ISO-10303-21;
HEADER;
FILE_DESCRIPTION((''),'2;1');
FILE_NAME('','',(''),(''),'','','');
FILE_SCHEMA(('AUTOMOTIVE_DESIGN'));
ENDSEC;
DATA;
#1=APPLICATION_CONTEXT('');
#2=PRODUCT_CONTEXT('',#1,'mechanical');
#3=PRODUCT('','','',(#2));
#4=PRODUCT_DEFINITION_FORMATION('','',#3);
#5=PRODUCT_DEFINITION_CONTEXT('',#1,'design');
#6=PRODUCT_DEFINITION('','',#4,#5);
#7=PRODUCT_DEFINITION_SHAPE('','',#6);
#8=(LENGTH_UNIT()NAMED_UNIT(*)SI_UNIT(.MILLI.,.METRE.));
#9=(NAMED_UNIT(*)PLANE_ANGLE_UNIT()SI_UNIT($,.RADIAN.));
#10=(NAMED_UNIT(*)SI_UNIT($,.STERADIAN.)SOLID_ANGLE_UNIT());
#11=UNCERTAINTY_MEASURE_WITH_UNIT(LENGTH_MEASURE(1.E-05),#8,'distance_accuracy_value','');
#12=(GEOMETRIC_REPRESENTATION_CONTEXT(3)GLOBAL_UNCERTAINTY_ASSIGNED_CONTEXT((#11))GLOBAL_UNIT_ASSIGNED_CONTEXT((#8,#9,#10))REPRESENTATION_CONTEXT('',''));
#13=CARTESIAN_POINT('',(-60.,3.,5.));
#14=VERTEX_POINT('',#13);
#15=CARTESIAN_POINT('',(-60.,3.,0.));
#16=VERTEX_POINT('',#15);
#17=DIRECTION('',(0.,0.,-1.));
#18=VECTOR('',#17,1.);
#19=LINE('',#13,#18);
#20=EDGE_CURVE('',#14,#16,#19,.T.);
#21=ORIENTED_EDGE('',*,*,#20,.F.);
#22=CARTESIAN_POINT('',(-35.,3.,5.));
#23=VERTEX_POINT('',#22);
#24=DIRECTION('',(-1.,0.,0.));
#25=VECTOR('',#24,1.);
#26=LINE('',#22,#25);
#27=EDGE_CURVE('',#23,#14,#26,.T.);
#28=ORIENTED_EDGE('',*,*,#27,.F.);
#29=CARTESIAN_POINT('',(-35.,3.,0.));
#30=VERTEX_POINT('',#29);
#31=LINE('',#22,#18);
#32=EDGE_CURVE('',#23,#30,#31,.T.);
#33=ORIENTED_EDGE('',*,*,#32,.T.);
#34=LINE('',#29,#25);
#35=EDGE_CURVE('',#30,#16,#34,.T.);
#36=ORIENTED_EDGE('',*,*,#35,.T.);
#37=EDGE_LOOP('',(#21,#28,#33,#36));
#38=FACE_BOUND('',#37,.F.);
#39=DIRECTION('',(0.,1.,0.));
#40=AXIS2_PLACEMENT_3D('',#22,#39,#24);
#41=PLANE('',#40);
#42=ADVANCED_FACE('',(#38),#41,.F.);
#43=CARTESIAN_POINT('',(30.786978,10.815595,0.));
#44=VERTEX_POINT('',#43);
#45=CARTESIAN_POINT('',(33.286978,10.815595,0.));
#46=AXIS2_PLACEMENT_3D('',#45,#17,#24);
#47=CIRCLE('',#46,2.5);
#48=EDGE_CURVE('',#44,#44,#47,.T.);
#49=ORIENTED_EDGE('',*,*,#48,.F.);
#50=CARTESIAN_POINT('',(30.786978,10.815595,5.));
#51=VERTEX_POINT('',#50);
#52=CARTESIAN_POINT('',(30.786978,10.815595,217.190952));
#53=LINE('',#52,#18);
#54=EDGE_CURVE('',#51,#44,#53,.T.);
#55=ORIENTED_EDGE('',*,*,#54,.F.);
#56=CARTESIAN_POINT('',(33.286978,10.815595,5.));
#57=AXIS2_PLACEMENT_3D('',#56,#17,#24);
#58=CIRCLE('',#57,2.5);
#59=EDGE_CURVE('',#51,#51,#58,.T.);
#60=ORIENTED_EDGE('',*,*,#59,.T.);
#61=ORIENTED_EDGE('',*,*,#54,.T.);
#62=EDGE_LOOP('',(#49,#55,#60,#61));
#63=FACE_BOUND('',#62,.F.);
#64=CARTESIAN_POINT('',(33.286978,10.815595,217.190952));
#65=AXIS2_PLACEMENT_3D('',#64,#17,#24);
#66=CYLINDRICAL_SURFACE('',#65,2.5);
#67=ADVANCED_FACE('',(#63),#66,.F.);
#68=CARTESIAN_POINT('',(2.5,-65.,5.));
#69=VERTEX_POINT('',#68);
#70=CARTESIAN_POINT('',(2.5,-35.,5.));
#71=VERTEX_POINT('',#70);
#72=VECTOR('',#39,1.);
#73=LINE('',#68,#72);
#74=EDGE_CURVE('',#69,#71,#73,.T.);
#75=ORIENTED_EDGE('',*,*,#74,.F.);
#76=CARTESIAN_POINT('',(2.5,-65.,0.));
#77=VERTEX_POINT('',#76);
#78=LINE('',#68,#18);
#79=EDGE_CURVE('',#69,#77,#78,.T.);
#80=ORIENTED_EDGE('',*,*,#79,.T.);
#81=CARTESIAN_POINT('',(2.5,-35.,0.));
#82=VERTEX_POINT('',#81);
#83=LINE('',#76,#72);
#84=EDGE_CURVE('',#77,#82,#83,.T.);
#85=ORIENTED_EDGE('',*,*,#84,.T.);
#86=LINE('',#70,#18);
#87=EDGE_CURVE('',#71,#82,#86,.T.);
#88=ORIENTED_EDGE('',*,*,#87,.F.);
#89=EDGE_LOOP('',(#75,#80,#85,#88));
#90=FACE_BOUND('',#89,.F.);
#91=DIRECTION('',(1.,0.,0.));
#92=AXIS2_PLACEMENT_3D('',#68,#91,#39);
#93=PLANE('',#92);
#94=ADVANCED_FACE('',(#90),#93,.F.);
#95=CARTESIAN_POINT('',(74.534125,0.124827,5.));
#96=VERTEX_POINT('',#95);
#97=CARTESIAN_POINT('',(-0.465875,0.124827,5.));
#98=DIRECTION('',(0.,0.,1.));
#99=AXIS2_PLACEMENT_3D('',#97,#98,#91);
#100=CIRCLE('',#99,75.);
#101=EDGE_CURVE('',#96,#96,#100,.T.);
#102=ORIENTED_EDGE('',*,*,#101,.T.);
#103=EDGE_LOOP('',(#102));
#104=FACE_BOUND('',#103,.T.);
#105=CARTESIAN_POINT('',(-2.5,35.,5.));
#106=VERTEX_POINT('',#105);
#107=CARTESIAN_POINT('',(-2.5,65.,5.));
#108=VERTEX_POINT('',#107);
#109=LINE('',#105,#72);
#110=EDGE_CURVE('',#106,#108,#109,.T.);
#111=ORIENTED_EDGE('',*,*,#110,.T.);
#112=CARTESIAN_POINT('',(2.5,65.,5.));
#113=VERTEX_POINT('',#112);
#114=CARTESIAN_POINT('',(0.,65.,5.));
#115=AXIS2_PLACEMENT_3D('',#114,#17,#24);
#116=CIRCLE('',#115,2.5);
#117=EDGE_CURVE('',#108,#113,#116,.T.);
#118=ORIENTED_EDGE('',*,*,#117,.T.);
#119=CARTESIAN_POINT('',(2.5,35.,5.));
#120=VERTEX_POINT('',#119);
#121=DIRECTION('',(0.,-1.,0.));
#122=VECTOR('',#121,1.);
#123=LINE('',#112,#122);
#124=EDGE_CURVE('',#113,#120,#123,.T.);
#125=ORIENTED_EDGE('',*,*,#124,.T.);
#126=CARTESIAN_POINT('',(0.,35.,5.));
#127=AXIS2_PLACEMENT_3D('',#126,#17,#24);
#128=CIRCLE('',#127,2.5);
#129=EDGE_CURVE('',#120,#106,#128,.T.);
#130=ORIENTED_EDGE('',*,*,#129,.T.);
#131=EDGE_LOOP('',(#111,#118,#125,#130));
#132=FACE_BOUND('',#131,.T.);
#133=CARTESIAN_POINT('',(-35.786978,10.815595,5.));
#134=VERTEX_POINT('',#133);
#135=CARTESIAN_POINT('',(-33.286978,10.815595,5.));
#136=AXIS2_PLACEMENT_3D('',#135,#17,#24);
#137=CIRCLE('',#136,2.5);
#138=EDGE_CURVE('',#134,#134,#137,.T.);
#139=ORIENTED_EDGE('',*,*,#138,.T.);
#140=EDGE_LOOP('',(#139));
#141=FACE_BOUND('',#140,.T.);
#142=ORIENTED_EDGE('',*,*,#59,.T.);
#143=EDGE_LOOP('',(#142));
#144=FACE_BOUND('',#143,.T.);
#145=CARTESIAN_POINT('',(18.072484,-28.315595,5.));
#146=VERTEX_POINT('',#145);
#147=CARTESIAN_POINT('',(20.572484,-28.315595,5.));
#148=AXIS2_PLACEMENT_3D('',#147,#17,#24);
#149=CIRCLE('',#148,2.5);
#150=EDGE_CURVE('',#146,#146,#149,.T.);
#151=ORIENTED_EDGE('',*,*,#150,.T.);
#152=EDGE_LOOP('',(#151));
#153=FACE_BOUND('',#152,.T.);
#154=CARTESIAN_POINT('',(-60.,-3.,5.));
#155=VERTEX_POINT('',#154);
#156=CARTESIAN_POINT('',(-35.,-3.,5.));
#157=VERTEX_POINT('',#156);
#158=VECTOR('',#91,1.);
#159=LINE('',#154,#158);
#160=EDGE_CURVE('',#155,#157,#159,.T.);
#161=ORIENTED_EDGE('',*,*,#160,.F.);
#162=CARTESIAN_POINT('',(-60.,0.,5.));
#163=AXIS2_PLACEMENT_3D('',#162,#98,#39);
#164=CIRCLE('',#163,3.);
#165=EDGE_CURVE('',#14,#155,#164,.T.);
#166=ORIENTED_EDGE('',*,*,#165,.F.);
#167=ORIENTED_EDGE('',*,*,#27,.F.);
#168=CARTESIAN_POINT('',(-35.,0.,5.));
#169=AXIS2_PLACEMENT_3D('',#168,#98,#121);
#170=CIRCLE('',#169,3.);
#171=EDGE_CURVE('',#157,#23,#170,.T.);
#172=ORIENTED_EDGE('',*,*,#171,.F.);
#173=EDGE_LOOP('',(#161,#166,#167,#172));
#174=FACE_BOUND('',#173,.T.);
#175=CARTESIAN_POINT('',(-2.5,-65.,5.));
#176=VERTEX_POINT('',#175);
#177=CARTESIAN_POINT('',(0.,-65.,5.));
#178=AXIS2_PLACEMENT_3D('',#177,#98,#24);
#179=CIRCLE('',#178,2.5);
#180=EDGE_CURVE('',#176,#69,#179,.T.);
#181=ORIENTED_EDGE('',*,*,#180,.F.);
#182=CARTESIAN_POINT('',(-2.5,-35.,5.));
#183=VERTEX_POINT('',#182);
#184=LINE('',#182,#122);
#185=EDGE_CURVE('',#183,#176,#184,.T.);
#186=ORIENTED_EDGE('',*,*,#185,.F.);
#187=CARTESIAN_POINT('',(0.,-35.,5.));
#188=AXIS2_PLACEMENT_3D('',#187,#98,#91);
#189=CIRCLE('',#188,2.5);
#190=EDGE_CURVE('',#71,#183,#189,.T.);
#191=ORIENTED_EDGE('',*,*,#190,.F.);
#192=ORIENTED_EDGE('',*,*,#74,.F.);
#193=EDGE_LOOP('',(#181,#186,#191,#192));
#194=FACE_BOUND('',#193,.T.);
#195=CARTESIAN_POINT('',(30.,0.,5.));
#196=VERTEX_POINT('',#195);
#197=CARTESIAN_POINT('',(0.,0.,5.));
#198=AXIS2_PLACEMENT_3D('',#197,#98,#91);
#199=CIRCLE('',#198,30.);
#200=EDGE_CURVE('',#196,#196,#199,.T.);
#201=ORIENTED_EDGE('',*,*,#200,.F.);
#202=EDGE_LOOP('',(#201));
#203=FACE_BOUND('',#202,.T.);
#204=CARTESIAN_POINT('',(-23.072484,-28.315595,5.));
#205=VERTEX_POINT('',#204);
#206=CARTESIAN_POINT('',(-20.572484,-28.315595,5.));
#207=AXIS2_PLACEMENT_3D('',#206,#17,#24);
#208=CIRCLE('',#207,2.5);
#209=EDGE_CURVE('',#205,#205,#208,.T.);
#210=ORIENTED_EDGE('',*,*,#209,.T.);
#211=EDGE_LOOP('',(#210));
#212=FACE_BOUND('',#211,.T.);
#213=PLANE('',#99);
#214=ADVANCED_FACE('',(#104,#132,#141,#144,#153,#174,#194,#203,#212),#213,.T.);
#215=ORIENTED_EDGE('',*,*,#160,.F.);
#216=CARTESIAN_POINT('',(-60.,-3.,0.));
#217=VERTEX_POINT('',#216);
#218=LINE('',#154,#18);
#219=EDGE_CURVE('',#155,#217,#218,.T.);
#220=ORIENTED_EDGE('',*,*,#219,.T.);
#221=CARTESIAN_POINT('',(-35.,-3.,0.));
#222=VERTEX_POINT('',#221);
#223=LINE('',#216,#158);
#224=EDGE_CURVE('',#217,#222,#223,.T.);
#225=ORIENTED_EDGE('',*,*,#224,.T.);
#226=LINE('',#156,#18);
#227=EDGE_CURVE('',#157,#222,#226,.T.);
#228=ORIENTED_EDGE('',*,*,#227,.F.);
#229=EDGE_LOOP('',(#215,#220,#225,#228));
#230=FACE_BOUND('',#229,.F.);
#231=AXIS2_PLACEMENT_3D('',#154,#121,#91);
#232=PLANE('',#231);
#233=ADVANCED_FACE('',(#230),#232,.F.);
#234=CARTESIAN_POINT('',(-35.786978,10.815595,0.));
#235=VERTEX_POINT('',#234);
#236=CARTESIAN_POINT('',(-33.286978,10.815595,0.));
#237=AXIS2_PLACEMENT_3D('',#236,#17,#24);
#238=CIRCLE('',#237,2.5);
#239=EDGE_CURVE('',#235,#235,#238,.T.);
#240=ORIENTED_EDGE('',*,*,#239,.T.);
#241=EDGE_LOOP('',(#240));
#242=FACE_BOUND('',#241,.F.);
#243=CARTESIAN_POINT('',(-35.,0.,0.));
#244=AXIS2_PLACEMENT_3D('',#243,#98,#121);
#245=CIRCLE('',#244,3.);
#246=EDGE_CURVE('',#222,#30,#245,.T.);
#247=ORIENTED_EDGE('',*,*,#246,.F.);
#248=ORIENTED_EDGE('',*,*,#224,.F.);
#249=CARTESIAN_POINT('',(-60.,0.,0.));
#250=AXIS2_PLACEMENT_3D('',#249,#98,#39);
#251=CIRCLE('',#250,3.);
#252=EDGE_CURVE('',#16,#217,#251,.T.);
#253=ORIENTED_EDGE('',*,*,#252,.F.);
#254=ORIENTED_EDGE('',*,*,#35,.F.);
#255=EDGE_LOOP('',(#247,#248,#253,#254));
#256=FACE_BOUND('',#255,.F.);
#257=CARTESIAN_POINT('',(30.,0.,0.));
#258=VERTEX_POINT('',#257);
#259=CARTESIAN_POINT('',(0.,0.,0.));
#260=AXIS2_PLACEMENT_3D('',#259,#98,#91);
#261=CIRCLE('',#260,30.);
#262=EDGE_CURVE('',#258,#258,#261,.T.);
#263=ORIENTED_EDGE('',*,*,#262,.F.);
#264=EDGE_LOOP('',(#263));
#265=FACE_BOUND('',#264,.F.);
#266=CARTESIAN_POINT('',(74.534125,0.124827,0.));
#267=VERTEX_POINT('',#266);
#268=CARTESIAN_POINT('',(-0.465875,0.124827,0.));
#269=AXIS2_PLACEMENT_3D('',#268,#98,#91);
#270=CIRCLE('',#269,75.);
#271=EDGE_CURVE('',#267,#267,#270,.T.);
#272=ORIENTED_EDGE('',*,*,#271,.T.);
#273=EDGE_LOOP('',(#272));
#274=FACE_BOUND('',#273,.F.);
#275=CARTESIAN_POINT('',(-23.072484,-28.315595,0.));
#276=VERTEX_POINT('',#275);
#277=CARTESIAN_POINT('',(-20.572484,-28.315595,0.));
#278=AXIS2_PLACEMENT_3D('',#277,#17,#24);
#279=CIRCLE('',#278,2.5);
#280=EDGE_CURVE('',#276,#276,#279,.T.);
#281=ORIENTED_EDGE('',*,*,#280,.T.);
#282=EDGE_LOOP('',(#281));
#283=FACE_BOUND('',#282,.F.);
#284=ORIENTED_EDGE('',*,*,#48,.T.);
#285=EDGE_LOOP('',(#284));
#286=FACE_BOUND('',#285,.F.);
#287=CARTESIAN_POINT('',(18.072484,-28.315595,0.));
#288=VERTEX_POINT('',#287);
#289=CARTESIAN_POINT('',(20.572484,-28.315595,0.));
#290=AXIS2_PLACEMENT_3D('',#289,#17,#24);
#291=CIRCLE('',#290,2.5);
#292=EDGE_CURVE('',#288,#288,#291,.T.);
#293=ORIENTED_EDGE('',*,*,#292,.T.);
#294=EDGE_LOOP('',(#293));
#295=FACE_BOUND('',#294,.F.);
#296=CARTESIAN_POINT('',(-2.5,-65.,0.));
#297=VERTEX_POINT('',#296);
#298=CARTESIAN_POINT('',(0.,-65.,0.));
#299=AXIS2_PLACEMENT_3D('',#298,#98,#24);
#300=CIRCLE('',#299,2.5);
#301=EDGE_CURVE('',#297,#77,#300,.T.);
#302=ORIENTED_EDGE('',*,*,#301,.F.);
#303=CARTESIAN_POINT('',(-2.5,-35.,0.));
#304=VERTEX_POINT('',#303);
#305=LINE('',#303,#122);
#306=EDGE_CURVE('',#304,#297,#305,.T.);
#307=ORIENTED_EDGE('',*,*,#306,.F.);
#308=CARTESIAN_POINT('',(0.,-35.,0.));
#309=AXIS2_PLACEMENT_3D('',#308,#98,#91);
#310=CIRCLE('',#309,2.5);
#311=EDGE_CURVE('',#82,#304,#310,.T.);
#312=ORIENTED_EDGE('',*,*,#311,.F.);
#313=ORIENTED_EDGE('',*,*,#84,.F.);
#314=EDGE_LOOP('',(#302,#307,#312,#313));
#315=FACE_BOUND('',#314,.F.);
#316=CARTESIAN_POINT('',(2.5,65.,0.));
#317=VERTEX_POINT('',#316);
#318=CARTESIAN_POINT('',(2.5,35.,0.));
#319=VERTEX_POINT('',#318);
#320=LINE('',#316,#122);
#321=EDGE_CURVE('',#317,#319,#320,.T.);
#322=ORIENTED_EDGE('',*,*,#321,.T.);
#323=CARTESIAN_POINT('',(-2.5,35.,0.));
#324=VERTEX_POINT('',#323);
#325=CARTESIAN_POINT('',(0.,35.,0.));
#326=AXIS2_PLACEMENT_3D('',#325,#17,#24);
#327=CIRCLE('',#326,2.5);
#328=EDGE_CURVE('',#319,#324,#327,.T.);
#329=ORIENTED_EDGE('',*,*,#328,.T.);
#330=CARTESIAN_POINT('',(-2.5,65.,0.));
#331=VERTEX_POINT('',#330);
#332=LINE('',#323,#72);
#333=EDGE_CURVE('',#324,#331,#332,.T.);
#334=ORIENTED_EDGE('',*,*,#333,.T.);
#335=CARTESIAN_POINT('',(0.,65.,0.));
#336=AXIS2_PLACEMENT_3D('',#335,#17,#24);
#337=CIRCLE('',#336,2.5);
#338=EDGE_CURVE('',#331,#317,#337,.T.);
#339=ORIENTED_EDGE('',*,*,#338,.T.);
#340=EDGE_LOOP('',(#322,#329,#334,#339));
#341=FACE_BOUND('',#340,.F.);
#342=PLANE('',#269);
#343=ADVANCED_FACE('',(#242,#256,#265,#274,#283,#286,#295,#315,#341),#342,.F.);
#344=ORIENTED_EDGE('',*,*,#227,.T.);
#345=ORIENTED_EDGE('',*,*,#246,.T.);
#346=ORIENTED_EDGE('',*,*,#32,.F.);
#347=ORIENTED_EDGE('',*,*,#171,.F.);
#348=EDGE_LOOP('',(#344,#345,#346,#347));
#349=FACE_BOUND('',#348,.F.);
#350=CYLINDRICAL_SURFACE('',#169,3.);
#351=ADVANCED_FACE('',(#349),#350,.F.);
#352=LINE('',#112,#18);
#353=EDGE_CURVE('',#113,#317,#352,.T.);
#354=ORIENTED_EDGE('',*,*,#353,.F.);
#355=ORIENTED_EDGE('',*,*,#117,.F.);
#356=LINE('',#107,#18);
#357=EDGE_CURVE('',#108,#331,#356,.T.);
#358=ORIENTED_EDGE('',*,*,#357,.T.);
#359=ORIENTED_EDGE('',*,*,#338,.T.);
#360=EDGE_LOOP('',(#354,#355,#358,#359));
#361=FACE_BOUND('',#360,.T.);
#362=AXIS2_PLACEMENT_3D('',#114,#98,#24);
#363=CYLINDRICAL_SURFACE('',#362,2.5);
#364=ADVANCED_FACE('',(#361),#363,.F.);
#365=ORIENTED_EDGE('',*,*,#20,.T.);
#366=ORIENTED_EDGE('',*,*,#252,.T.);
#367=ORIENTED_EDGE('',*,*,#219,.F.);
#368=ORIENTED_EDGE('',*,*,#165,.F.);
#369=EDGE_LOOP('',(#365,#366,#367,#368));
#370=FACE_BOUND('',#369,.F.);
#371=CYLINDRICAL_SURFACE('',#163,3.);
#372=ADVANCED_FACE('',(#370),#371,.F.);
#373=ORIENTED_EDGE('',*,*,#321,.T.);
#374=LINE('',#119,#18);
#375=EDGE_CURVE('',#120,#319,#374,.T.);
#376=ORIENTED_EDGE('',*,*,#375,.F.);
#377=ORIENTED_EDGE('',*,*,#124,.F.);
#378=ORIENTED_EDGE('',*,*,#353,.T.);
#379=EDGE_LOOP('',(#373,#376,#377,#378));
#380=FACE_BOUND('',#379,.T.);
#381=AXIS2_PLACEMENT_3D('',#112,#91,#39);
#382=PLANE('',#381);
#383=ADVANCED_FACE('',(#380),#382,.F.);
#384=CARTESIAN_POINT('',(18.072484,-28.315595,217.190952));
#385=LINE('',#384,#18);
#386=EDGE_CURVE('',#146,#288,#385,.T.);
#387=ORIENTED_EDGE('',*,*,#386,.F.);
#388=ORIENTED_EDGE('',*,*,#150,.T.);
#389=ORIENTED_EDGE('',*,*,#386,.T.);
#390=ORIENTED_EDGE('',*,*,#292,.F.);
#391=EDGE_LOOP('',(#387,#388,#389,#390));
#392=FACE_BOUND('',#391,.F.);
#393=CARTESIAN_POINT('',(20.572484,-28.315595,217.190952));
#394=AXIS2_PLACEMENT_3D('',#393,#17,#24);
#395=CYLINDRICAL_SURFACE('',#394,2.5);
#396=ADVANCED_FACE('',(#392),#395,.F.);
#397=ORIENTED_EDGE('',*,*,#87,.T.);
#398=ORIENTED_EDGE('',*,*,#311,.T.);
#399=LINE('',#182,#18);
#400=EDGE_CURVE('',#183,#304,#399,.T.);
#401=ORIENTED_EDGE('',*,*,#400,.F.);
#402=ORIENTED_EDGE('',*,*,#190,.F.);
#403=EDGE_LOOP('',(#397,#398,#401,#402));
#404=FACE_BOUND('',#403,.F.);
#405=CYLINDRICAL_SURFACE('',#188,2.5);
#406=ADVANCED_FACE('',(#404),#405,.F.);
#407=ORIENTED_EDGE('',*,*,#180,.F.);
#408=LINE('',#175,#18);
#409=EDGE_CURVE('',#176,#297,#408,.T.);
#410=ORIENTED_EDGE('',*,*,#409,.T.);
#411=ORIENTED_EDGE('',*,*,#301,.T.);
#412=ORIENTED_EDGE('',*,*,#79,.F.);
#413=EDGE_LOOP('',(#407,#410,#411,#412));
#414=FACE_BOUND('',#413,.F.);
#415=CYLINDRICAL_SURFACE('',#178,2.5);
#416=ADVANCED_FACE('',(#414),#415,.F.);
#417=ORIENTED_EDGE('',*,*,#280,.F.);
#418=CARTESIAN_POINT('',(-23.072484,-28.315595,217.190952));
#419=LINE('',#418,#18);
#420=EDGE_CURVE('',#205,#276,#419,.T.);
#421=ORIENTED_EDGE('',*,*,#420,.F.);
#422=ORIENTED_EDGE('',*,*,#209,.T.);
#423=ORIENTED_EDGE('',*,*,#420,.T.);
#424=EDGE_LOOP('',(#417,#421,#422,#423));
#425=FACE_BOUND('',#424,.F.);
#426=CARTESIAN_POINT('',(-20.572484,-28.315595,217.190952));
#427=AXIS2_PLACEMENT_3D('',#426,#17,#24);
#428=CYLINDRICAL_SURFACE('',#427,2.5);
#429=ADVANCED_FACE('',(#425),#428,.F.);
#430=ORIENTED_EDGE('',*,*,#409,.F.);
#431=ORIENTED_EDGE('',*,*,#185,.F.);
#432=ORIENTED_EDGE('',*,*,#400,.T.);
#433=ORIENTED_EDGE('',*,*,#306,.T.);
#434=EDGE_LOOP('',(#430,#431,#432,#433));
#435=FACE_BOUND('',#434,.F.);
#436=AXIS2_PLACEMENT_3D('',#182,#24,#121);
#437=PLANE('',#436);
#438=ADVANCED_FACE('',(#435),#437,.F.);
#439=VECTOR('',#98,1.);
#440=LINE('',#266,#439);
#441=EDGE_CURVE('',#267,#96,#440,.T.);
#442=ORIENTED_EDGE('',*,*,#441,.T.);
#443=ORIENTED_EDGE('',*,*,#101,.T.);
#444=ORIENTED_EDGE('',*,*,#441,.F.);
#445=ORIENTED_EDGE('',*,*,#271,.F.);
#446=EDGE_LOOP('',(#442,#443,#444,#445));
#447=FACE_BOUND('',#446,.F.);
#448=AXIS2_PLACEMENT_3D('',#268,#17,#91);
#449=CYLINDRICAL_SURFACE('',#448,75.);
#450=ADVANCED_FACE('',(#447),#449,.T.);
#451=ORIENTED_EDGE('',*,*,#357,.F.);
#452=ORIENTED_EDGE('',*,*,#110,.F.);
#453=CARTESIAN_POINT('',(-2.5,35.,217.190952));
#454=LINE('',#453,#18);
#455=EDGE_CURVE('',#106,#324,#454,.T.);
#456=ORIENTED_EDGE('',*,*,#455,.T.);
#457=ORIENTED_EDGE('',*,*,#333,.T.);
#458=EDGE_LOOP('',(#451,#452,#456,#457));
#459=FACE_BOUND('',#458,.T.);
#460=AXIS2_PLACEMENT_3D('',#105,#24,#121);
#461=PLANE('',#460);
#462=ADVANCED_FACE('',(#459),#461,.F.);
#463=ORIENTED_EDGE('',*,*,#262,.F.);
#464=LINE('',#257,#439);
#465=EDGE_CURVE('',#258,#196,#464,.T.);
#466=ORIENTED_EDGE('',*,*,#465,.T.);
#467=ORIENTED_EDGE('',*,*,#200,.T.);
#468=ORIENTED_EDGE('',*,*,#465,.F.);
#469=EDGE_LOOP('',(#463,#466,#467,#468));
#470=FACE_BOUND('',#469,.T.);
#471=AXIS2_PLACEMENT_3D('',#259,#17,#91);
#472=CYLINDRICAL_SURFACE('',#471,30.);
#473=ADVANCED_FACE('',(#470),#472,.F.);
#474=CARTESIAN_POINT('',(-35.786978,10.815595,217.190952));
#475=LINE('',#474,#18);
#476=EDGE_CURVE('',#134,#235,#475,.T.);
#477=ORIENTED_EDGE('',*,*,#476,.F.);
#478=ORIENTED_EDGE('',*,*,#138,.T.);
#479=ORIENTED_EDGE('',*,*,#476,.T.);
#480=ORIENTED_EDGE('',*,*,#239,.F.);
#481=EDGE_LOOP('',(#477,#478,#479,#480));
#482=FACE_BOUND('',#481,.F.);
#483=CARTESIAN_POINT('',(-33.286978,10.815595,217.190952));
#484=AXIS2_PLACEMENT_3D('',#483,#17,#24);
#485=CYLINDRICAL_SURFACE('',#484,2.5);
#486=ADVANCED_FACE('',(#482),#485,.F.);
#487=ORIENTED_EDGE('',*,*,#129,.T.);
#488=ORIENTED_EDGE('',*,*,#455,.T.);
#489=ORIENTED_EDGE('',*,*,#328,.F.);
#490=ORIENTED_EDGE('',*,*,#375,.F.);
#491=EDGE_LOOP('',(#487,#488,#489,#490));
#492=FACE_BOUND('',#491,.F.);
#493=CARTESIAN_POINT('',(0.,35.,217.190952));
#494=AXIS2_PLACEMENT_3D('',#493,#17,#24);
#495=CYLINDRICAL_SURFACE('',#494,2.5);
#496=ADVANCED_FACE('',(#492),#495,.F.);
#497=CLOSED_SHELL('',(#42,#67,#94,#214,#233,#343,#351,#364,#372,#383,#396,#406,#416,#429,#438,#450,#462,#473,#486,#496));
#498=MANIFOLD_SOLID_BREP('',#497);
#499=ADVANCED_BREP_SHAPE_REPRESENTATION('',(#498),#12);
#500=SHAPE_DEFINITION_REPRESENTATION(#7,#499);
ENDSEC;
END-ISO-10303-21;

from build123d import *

# Parameters (mm, degrees)
F0_R     = 75
F0_R_2   = 30
F1_DEPTH = 5
F3_D     = 5
F5_DEPTH = 5
F7_DEPTH = 5


# Not quite as in the source:
# - a pattern or mirror of a feature is missing from the dataset's text; its kind, count and spacing are read off the source's solid


with BuildPart() as f1:
    # F0 (on Top) → F1 (new body)
    with BuildSketch(Plane.XY):
        with Locations((-0.4658745937, 0.1248266798)):
            Circle(F0_R)
        Circle(F0_R_2, mode=Mode.SUBTRACT)
    extrude(amount=F1_DEPTH)

    # F3 (through all)
    with Locations(Plane.XY.offset(5)):
        with Locations((0, 35), (33.2869780703, 10.8155948031), (20.5724838302, -28.3155948031), (-20.5724838302, -28.3155948031), (-33.2869780703, 10.8155948031)):
            Hole(F3_D / 2)

    # F4 (on face) → F5 (cut, through all)
    with BuildSketch(Plane.XY.offset(5)):
        with BuildLine():
            ThreePointArc((2.5, -35), (0, -32.5), (-2.5, -35))
            Line((-2.5, -35), (-2.5, -65))
            ThreePointArc((-2.5, -65), (0, -67.5), (2.5, -65))
            Line((2.5, -65), (2.5, -35))
        make_face()
    f5 = extrude(amount=-F5_DEPTH, mode=Mode.SUBTRACT)

    # F5_copies: F5 across plane
    add(f5.mirror(Plane.ZX), mode=Mode.SUBTRACT)

    # F6 (on face) → F7 (cut, through all)
    with BuildSketch(Plane.XY.offset(5)):
        with BuildLine():
            ThreePointArc((-60, 3), (-63, 0), (-60, -3))
            Line((-60, -3), (-35, -3))
            ThreePointArc((-35, -3), (-32, 0), (-35, 3))
            Line((-35, 3), (-60, 3))
        make_face()
    extrude(amount=-F7_DEPTH, mode=Mode.SUBTRACT)


solid = f1.part
